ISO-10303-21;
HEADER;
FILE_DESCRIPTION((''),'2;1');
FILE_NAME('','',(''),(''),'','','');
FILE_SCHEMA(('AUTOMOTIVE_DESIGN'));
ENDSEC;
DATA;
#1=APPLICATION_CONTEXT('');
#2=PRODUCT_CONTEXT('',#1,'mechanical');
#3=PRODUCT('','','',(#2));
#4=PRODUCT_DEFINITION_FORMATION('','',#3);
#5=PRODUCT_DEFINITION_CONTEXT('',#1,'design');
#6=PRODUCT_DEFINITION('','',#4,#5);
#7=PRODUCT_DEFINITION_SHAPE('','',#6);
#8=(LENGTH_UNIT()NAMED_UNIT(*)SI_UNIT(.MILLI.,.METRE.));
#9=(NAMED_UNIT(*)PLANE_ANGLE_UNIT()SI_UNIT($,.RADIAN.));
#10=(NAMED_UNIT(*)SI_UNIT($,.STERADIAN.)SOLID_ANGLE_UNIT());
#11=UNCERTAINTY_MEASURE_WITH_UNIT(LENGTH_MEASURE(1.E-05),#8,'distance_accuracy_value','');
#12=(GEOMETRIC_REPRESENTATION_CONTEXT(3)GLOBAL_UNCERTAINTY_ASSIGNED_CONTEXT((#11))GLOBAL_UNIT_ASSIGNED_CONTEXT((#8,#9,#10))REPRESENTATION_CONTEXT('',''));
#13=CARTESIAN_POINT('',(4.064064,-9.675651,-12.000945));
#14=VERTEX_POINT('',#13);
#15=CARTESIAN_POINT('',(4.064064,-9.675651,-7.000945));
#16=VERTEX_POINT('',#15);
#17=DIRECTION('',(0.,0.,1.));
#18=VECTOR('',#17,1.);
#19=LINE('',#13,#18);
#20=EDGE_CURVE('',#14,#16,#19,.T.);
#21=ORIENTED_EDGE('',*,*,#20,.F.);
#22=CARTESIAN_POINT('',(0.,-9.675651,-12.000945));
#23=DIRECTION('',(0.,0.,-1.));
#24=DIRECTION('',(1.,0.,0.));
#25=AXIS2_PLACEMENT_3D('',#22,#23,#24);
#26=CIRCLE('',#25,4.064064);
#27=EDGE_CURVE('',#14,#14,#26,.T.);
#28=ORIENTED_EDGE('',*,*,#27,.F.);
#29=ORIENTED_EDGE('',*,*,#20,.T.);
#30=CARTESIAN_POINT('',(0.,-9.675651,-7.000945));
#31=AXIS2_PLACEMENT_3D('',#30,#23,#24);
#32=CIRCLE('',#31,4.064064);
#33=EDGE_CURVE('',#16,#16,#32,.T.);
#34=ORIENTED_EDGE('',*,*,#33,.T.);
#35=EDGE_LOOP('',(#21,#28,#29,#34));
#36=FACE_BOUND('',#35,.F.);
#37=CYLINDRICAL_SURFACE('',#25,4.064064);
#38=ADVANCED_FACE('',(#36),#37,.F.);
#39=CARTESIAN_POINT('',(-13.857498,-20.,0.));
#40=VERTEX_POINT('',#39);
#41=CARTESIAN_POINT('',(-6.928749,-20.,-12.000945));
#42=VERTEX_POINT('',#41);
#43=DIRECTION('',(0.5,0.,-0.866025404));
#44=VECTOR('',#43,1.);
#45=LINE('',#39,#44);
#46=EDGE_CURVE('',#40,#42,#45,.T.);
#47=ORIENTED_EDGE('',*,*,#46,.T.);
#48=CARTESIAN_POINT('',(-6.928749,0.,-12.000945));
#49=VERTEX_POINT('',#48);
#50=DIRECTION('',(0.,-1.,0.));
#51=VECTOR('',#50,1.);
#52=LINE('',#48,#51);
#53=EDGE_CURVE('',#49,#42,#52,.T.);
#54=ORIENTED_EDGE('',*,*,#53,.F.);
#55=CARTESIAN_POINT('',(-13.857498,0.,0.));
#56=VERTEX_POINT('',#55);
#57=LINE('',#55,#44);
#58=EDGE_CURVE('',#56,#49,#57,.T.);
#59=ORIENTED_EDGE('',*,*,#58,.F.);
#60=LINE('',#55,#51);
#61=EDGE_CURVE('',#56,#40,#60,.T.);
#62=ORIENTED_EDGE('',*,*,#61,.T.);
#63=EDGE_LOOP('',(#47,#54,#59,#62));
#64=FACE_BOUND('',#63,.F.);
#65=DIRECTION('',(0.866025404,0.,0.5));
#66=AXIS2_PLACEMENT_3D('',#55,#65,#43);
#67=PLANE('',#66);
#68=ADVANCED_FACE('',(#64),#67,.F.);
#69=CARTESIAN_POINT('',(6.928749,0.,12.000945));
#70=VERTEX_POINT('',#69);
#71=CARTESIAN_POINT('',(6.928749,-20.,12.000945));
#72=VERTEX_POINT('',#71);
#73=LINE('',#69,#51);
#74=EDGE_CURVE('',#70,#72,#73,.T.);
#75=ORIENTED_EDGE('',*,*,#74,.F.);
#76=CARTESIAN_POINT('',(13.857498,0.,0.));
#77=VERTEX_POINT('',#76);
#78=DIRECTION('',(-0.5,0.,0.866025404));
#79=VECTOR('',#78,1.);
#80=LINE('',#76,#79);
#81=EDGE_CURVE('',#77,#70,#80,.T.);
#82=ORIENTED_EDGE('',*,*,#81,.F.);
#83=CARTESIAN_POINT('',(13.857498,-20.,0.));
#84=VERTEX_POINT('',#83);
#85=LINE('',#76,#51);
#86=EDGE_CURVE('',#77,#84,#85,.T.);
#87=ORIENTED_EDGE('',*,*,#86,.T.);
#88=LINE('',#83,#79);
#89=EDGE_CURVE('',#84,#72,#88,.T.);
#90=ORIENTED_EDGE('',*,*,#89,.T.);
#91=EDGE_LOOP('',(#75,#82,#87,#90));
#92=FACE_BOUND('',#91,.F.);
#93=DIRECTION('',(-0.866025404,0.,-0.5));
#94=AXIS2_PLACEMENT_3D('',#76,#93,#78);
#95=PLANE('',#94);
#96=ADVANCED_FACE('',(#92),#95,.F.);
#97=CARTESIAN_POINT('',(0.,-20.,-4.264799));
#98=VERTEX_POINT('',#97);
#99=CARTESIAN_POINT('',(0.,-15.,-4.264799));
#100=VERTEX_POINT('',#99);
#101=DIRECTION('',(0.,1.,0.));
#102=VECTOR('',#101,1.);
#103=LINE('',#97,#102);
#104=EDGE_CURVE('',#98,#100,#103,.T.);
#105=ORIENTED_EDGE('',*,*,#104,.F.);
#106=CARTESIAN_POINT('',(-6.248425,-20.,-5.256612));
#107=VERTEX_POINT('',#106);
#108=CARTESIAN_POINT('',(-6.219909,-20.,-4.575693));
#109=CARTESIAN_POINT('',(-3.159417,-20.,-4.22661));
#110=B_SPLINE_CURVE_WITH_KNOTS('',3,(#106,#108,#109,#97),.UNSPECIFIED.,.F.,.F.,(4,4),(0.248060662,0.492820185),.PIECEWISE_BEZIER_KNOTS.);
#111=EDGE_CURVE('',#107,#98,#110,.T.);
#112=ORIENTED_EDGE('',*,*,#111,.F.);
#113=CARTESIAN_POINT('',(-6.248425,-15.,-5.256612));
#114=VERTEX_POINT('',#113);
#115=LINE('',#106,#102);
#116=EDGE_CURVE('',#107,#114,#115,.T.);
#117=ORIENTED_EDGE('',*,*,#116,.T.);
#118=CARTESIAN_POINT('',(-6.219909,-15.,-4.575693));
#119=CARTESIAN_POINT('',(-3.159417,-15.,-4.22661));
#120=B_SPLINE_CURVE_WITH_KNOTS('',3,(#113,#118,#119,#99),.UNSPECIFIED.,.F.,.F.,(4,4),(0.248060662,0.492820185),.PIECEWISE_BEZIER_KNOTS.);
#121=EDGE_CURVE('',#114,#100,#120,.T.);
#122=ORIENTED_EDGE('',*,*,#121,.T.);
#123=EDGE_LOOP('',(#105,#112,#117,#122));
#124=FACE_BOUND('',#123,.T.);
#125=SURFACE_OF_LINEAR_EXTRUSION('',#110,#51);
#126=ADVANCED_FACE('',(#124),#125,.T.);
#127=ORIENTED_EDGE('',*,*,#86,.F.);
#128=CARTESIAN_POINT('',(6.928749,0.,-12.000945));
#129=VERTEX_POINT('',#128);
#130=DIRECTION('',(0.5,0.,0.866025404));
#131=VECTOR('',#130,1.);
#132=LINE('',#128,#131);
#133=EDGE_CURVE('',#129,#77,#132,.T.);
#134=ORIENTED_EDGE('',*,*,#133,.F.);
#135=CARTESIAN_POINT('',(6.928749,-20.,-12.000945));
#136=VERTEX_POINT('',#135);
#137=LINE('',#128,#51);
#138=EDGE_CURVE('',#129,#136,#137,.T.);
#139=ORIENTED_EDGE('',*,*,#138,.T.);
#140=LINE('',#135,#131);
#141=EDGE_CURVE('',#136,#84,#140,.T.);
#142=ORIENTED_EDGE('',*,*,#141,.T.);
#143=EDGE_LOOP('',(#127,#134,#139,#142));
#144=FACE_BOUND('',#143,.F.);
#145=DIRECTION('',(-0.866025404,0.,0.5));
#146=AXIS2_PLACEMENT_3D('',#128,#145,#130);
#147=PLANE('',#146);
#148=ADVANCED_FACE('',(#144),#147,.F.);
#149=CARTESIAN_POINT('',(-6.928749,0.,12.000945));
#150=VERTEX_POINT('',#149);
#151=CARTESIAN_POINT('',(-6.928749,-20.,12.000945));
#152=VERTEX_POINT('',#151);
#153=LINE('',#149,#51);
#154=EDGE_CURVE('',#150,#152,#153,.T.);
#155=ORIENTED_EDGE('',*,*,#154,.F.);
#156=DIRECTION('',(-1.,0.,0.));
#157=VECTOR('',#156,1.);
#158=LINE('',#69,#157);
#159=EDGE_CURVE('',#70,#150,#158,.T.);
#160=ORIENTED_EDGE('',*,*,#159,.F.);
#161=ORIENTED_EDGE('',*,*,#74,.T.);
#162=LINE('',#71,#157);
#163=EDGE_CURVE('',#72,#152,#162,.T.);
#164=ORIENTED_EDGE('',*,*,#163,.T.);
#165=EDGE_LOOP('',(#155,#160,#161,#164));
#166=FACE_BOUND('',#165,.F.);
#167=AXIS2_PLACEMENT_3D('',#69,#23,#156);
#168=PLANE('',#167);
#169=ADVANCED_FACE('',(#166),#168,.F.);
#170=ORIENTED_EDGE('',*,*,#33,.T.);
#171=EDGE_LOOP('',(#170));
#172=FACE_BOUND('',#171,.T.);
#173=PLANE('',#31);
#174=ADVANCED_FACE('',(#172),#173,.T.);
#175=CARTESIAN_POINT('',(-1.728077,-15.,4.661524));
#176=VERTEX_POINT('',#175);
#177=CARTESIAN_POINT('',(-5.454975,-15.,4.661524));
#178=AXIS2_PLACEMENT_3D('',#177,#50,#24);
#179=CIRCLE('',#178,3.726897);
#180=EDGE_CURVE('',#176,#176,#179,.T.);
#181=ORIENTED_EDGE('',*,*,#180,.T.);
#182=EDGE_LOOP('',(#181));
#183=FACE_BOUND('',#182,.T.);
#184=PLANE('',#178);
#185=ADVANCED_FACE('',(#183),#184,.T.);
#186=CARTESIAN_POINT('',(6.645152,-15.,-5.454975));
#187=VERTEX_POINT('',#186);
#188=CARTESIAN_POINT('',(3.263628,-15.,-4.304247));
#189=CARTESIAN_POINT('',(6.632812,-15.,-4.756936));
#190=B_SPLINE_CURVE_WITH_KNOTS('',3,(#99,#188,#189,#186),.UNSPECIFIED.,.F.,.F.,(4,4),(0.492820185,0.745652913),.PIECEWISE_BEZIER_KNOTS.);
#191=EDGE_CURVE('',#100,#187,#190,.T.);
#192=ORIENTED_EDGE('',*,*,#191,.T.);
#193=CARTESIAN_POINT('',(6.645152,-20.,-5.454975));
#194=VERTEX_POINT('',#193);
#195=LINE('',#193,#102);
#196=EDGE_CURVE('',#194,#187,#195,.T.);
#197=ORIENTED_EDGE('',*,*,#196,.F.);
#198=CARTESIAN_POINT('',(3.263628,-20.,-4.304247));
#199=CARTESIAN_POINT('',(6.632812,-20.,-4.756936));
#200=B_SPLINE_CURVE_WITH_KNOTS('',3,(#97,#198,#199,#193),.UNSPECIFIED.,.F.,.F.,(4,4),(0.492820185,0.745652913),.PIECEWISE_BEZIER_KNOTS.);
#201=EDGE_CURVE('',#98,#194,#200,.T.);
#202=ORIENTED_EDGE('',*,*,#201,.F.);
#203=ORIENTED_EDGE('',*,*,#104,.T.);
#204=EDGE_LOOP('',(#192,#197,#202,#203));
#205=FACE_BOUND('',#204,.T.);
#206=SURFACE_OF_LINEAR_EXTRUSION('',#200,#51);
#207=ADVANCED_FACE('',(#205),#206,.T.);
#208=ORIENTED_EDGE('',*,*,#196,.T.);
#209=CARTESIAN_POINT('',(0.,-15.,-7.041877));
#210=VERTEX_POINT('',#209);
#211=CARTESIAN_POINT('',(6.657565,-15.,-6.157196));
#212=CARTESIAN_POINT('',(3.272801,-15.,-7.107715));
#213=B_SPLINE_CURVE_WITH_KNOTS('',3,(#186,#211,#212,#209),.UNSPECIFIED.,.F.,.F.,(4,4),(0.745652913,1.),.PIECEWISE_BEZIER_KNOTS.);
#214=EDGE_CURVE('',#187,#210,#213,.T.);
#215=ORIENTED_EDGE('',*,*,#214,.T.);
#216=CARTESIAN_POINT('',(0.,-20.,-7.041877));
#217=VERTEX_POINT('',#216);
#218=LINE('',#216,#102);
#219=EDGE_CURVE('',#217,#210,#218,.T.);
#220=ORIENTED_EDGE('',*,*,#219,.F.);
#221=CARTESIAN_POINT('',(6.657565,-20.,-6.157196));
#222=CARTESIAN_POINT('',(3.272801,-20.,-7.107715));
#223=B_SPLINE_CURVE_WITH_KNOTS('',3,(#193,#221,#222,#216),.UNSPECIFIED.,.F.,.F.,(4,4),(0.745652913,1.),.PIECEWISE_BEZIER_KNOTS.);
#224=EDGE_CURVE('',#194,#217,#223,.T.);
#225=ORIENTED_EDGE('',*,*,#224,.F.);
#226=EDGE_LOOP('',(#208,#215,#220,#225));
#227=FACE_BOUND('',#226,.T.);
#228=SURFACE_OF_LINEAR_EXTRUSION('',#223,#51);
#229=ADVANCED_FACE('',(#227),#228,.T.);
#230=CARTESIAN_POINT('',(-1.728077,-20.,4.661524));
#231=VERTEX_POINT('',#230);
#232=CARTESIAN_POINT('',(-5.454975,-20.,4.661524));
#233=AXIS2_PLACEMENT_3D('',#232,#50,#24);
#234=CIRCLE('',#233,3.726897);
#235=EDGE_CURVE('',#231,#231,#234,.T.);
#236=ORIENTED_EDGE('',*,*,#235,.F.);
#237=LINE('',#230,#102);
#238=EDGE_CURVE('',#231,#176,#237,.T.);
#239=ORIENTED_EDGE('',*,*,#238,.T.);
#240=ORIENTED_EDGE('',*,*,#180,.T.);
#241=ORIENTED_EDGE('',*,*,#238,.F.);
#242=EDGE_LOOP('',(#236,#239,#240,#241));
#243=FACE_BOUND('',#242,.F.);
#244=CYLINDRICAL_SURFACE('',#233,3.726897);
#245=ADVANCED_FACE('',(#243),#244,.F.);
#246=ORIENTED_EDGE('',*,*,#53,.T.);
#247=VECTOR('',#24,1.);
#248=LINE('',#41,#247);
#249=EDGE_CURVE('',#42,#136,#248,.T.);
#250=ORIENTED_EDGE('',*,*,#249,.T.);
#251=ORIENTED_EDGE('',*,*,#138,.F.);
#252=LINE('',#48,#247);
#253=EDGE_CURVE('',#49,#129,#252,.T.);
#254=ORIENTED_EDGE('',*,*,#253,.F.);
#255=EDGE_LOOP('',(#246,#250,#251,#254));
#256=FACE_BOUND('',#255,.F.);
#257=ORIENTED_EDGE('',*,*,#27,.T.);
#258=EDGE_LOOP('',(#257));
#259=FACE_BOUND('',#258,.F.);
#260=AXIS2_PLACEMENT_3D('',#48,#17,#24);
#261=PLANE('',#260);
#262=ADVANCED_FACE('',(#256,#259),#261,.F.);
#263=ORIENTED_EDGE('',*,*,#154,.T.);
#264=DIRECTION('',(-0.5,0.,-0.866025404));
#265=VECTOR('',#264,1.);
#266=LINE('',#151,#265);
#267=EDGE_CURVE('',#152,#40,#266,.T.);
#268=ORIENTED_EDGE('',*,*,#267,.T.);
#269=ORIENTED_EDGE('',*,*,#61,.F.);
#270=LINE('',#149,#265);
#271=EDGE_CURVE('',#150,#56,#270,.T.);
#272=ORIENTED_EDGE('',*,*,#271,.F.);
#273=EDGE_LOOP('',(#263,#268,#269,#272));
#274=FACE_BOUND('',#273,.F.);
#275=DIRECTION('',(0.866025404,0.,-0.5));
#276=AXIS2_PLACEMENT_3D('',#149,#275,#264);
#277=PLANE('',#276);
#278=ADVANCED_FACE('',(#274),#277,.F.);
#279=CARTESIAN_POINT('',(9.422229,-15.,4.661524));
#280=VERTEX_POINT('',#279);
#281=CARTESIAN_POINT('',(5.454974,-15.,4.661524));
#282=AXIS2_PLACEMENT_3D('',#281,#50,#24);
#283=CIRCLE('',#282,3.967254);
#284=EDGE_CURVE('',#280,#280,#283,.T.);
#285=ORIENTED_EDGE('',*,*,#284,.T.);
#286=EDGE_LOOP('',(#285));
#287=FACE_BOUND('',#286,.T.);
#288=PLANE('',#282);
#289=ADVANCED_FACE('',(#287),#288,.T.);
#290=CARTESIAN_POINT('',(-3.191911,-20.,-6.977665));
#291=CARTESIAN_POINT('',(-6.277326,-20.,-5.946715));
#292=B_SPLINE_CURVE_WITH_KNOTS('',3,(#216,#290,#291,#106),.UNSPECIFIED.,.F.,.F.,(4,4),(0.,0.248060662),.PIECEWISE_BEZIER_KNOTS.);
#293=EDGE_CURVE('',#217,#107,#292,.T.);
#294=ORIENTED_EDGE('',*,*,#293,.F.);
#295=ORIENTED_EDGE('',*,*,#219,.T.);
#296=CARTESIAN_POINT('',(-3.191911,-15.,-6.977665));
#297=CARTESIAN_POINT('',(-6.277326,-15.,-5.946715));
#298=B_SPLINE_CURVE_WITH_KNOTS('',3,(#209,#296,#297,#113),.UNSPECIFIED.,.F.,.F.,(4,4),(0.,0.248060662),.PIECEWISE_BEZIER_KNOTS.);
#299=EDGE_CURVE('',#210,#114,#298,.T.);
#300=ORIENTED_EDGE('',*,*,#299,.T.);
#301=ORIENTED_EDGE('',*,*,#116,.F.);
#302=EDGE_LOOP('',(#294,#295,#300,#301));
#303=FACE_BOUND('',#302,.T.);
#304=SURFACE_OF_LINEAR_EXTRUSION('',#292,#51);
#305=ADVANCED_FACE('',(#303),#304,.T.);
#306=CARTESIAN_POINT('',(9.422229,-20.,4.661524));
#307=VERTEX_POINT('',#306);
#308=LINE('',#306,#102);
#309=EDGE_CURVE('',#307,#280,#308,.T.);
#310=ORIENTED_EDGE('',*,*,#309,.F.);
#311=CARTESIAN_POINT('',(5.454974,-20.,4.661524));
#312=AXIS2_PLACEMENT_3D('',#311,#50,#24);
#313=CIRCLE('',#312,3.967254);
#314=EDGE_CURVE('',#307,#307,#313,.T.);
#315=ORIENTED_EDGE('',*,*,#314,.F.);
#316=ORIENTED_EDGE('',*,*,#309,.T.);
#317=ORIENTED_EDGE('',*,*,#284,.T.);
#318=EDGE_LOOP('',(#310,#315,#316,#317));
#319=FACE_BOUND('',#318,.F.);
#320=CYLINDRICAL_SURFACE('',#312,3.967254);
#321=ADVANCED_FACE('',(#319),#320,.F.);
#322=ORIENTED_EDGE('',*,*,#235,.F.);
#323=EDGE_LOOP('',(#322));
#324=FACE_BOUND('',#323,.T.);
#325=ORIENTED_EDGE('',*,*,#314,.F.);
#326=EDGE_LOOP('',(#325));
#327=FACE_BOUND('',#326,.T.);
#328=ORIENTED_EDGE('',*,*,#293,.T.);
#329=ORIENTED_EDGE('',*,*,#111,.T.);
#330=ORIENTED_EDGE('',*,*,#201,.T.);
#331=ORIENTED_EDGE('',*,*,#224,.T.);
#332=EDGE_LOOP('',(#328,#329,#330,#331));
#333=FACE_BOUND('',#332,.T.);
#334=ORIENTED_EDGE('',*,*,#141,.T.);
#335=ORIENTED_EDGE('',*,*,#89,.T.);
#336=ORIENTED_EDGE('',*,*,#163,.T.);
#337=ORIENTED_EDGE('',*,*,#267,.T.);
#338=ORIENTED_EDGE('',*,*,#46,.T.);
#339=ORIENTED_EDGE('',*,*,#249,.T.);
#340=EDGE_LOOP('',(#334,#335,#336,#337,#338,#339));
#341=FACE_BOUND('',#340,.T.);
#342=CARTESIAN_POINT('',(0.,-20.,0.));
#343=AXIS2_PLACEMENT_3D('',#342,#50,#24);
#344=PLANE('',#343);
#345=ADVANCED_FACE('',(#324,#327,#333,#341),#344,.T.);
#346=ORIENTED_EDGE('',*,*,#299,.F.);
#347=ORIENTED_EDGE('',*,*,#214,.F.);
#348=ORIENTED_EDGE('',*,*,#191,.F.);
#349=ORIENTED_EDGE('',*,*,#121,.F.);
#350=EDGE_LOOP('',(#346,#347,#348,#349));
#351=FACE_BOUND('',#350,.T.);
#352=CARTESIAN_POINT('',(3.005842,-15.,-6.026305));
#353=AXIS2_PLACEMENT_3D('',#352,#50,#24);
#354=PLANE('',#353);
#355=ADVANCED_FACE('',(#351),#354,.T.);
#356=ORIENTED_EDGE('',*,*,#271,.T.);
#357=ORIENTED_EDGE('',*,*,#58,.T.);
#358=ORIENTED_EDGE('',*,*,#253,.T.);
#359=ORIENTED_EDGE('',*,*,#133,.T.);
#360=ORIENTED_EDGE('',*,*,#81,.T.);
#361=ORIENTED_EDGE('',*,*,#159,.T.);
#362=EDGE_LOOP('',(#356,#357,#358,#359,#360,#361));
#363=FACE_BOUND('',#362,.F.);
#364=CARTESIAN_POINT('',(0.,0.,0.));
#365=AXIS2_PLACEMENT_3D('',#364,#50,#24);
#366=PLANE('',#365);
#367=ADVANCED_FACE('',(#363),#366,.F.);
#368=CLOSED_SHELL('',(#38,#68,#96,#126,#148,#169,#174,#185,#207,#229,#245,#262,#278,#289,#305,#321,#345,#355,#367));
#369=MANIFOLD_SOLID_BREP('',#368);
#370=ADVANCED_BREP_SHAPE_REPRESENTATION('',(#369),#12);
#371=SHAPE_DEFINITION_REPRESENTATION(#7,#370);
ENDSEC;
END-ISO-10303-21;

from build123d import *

# Parameters (mm, degrees)
F1_DEPTH = 20
F2_R     = 3.9672544226
F2_R_2   = 3.7268973953
F4_DEPTH = 5
F6_R     = 4.0640636786
F7_DEPTH = 5
F8_DEPTH = 5


# Not quite as in the source:
# - the program builds the solid bodies; features that only make, move or delete a surface that nothing else refers to are left out


with BuildPart() as f1:
    # F0 (on Front) → F1 (new body)
    with BuildSketch(Plane.XZ):
        Polygon((-6.9287490553, -12.0009453967), (6.9287490553, -12.0009453967), (13.8574981107, 0), (6.9287490553, 12.0009453967), (-6.9287490553, 12.0009453967), (-13.8574981107, 0), align=None)
    extrude(amount=F1_DEPTH)

    # F2 (on face) → F4 (cut)
    with BuildSketch(Plane.XZ.offset(20)):
        with Locations((5.454974249, 4.6615242027)):
            Circle(F2_R)
        with Locations((-5.4549747147, 4.6615242027)):
            Circle(F2_R_2)
    extrude(amount=-F4_DEPTH, mode=Mode.SUBTRACT)

    # F6 (on face) → F7 (cut)
    with BuildSketch(Plane(origin=(0, 0, -12.0009453967), x_dir=(1, 0, 0), z_dir=(0, 0, -1))):
        with Locations((0, 9.6756508574)):
            Circle(F6_R)
    extrude(amount=-F7_DEPTH, mode=Mode.SUBTRACT)

    # F3 (on face) → F8 (cut)
    with BuildSketch(Plane.XZ.offset(20)):
        with BuildLine():
            Line((0, -5.3527420043), (0, -7.04187667))
            add(Edge.make_bspline(
                [(6.6451518796, -5.4549751803), (6.6575654316, -6.1571957747), (3.2728013866, -7.1077153996), (0, -7.04187667)],
                knots=[0.7456529131, 0.7456529131, 0.7456529131, 0.7456529131, 1, 1, 1, 1], degree=3))
            Line((6.6451518796, -5.4549751803), (0, -5.3527420043))
        make_face()
        with BuildLine():
            Line((0, -5.3527420043), (6.6451518796, -5.4549751803))
            add(Edge.make_bspline(
                [(0, -4.2647989467), (3.2636275259, -4.3042470372), (6.6328122368, -4.7569355417), (6.6451518796, -5.4549751803)],
                knots=[0.492820185, 0.492820185, 0.492820185, 0.492820185, 0.7456529131, 0.7456529131, 0.7456529131, 0.7456529131], degree=3))
            Line((0, -4.2647989467), (0, -5.3527420043))
        make_face()
        with BuildLine():
            add(Edge.make_bspline(
                [(-6.2484252267, -5.2566123195), (-6.2199094707, -4.57569338), (-3.1594165925, -4.2266104736), (0, -4.2647989467)],
                knots=[0.2480606621, 0.2480606621, 0.2480606621, 0.2480606621, 0.492820185, 0.492820185, 0.492820185, 0.492820185], degree=3))
            Line((-6.2484252267, -5.2566123195), (0, -5.3527420043))
            Line((0, -5.3527420043), (0, -4.2647989467))
        make_face()
        with BuildLine():
            add(Edge.make_bspline(
                [(0, -7.04187667), (-3.191911057, -6.9776652057), (-6.2773255825, -5.9467150004), (-6.2484252267, -5.2566123195)],
                knots=[0, 0, 0, 0, 0.2480606621, 0.2480606621, 0.2480606621, 0.2480606621], degree=3))
            Line((0, -7.04187667), (0, -5.3527420043))
            Line((0, -5.3527420043), (-6.2484252267, -5.2566123195))
        make_face()
    extrude(amount=-F8_DEPTH, mode=Mode.SUBTRACT)


solid = f1.part
